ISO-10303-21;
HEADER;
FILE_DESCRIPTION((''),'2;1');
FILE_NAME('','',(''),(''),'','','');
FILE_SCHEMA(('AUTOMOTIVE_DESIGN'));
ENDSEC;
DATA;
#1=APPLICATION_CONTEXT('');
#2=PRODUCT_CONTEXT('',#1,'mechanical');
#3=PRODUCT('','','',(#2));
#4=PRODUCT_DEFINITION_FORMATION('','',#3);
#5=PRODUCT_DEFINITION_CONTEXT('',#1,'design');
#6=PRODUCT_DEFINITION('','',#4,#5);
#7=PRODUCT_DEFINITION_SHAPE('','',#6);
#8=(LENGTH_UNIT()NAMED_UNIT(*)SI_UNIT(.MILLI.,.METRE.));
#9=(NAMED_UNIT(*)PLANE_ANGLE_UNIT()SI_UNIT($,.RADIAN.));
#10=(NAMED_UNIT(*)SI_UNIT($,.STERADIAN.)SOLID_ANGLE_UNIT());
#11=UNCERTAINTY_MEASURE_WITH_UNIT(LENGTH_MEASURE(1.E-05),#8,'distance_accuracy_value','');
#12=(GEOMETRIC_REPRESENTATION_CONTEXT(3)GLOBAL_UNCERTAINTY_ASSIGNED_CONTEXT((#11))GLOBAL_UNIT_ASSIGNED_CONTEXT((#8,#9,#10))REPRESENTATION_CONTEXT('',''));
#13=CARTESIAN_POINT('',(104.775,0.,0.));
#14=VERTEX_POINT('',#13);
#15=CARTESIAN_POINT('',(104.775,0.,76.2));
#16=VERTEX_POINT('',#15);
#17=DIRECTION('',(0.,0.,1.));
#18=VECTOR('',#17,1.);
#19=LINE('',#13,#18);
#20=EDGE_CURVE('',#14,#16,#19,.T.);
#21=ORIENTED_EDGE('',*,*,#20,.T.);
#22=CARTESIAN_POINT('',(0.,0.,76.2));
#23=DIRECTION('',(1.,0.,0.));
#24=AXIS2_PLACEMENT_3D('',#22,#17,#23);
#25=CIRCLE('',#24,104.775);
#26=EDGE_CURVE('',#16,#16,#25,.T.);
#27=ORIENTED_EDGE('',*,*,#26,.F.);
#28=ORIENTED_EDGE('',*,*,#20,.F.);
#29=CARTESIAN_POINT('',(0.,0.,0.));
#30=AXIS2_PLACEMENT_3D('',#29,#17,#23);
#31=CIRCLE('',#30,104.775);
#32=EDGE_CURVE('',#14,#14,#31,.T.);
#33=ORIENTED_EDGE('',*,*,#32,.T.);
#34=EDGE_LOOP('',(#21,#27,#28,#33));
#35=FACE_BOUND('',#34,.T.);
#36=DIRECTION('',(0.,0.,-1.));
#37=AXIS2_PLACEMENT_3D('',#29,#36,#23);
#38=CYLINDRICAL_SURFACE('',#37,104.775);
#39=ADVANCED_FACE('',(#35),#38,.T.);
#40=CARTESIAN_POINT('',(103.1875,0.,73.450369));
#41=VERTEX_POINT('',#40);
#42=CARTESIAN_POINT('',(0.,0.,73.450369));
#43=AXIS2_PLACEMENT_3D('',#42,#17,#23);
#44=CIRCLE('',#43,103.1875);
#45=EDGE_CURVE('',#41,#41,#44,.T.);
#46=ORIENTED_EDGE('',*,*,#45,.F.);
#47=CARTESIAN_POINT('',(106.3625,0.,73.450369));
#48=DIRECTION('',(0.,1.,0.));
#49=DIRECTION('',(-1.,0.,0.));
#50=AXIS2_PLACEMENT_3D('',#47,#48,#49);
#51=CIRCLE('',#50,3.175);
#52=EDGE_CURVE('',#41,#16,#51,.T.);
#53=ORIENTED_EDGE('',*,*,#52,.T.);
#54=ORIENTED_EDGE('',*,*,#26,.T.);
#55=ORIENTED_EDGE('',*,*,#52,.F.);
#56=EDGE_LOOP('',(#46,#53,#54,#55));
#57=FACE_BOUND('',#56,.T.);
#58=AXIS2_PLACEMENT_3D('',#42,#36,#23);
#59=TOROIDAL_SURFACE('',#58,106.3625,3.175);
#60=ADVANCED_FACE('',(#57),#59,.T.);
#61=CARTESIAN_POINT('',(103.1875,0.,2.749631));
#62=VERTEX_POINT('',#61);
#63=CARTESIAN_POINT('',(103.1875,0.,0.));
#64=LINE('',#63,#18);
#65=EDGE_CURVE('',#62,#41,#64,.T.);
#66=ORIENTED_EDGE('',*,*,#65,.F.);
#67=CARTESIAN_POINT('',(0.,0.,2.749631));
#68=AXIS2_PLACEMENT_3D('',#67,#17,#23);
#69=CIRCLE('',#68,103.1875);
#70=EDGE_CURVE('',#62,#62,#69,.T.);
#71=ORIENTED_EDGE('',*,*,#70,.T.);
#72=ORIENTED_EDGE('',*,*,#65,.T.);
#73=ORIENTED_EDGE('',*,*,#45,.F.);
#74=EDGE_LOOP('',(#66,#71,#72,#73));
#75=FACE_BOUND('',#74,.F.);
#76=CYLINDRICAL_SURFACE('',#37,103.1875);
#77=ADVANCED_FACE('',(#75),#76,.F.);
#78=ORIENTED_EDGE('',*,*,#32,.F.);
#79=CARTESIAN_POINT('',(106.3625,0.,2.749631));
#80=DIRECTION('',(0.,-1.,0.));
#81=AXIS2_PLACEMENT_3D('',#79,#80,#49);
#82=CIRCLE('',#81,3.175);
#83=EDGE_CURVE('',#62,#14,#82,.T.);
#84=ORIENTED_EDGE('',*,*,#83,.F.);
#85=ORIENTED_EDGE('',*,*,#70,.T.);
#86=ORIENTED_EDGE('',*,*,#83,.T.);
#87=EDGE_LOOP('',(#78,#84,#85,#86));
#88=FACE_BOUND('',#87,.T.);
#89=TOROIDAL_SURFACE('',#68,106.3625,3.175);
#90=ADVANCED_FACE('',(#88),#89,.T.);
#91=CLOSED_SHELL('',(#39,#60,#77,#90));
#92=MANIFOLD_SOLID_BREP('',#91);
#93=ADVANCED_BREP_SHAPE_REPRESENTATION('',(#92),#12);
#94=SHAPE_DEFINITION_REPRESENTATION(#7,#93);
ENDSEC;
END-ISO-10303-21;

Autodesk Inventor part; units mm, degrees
ref_plane "YZ Plane" through (0, 0, 0) normal (1, 0, 0) x (0, 1, 0)
ref_plane "XZ Plane" through (0, 0, 0) normal (0, 1, 0) x (-1, 0, 0)
ref_plane "XY Plane" through (0, 0, 0) normal (0, 0, 1) x (1, 0, 0)
sketch "Sketch1" plane through (0, 0, 0) normal (0, 0, 1) x (1, 0, 0)
  circle A0 centre (0, 0) radius 103.1875
  circle A1 centre (0, 0) radius 104.775
  dimension "d0" = 1.5875
  dimension "d1" = 206.375
extrude "Extrusion1" add sketch "Sketch1" along normal blind 76.2
fillet "Fillet1" radius 3.175 2 edges at (-103.1875, 0, 76.2) (-103.1875, 0, 0)
properties part number "Duct_Inner"
